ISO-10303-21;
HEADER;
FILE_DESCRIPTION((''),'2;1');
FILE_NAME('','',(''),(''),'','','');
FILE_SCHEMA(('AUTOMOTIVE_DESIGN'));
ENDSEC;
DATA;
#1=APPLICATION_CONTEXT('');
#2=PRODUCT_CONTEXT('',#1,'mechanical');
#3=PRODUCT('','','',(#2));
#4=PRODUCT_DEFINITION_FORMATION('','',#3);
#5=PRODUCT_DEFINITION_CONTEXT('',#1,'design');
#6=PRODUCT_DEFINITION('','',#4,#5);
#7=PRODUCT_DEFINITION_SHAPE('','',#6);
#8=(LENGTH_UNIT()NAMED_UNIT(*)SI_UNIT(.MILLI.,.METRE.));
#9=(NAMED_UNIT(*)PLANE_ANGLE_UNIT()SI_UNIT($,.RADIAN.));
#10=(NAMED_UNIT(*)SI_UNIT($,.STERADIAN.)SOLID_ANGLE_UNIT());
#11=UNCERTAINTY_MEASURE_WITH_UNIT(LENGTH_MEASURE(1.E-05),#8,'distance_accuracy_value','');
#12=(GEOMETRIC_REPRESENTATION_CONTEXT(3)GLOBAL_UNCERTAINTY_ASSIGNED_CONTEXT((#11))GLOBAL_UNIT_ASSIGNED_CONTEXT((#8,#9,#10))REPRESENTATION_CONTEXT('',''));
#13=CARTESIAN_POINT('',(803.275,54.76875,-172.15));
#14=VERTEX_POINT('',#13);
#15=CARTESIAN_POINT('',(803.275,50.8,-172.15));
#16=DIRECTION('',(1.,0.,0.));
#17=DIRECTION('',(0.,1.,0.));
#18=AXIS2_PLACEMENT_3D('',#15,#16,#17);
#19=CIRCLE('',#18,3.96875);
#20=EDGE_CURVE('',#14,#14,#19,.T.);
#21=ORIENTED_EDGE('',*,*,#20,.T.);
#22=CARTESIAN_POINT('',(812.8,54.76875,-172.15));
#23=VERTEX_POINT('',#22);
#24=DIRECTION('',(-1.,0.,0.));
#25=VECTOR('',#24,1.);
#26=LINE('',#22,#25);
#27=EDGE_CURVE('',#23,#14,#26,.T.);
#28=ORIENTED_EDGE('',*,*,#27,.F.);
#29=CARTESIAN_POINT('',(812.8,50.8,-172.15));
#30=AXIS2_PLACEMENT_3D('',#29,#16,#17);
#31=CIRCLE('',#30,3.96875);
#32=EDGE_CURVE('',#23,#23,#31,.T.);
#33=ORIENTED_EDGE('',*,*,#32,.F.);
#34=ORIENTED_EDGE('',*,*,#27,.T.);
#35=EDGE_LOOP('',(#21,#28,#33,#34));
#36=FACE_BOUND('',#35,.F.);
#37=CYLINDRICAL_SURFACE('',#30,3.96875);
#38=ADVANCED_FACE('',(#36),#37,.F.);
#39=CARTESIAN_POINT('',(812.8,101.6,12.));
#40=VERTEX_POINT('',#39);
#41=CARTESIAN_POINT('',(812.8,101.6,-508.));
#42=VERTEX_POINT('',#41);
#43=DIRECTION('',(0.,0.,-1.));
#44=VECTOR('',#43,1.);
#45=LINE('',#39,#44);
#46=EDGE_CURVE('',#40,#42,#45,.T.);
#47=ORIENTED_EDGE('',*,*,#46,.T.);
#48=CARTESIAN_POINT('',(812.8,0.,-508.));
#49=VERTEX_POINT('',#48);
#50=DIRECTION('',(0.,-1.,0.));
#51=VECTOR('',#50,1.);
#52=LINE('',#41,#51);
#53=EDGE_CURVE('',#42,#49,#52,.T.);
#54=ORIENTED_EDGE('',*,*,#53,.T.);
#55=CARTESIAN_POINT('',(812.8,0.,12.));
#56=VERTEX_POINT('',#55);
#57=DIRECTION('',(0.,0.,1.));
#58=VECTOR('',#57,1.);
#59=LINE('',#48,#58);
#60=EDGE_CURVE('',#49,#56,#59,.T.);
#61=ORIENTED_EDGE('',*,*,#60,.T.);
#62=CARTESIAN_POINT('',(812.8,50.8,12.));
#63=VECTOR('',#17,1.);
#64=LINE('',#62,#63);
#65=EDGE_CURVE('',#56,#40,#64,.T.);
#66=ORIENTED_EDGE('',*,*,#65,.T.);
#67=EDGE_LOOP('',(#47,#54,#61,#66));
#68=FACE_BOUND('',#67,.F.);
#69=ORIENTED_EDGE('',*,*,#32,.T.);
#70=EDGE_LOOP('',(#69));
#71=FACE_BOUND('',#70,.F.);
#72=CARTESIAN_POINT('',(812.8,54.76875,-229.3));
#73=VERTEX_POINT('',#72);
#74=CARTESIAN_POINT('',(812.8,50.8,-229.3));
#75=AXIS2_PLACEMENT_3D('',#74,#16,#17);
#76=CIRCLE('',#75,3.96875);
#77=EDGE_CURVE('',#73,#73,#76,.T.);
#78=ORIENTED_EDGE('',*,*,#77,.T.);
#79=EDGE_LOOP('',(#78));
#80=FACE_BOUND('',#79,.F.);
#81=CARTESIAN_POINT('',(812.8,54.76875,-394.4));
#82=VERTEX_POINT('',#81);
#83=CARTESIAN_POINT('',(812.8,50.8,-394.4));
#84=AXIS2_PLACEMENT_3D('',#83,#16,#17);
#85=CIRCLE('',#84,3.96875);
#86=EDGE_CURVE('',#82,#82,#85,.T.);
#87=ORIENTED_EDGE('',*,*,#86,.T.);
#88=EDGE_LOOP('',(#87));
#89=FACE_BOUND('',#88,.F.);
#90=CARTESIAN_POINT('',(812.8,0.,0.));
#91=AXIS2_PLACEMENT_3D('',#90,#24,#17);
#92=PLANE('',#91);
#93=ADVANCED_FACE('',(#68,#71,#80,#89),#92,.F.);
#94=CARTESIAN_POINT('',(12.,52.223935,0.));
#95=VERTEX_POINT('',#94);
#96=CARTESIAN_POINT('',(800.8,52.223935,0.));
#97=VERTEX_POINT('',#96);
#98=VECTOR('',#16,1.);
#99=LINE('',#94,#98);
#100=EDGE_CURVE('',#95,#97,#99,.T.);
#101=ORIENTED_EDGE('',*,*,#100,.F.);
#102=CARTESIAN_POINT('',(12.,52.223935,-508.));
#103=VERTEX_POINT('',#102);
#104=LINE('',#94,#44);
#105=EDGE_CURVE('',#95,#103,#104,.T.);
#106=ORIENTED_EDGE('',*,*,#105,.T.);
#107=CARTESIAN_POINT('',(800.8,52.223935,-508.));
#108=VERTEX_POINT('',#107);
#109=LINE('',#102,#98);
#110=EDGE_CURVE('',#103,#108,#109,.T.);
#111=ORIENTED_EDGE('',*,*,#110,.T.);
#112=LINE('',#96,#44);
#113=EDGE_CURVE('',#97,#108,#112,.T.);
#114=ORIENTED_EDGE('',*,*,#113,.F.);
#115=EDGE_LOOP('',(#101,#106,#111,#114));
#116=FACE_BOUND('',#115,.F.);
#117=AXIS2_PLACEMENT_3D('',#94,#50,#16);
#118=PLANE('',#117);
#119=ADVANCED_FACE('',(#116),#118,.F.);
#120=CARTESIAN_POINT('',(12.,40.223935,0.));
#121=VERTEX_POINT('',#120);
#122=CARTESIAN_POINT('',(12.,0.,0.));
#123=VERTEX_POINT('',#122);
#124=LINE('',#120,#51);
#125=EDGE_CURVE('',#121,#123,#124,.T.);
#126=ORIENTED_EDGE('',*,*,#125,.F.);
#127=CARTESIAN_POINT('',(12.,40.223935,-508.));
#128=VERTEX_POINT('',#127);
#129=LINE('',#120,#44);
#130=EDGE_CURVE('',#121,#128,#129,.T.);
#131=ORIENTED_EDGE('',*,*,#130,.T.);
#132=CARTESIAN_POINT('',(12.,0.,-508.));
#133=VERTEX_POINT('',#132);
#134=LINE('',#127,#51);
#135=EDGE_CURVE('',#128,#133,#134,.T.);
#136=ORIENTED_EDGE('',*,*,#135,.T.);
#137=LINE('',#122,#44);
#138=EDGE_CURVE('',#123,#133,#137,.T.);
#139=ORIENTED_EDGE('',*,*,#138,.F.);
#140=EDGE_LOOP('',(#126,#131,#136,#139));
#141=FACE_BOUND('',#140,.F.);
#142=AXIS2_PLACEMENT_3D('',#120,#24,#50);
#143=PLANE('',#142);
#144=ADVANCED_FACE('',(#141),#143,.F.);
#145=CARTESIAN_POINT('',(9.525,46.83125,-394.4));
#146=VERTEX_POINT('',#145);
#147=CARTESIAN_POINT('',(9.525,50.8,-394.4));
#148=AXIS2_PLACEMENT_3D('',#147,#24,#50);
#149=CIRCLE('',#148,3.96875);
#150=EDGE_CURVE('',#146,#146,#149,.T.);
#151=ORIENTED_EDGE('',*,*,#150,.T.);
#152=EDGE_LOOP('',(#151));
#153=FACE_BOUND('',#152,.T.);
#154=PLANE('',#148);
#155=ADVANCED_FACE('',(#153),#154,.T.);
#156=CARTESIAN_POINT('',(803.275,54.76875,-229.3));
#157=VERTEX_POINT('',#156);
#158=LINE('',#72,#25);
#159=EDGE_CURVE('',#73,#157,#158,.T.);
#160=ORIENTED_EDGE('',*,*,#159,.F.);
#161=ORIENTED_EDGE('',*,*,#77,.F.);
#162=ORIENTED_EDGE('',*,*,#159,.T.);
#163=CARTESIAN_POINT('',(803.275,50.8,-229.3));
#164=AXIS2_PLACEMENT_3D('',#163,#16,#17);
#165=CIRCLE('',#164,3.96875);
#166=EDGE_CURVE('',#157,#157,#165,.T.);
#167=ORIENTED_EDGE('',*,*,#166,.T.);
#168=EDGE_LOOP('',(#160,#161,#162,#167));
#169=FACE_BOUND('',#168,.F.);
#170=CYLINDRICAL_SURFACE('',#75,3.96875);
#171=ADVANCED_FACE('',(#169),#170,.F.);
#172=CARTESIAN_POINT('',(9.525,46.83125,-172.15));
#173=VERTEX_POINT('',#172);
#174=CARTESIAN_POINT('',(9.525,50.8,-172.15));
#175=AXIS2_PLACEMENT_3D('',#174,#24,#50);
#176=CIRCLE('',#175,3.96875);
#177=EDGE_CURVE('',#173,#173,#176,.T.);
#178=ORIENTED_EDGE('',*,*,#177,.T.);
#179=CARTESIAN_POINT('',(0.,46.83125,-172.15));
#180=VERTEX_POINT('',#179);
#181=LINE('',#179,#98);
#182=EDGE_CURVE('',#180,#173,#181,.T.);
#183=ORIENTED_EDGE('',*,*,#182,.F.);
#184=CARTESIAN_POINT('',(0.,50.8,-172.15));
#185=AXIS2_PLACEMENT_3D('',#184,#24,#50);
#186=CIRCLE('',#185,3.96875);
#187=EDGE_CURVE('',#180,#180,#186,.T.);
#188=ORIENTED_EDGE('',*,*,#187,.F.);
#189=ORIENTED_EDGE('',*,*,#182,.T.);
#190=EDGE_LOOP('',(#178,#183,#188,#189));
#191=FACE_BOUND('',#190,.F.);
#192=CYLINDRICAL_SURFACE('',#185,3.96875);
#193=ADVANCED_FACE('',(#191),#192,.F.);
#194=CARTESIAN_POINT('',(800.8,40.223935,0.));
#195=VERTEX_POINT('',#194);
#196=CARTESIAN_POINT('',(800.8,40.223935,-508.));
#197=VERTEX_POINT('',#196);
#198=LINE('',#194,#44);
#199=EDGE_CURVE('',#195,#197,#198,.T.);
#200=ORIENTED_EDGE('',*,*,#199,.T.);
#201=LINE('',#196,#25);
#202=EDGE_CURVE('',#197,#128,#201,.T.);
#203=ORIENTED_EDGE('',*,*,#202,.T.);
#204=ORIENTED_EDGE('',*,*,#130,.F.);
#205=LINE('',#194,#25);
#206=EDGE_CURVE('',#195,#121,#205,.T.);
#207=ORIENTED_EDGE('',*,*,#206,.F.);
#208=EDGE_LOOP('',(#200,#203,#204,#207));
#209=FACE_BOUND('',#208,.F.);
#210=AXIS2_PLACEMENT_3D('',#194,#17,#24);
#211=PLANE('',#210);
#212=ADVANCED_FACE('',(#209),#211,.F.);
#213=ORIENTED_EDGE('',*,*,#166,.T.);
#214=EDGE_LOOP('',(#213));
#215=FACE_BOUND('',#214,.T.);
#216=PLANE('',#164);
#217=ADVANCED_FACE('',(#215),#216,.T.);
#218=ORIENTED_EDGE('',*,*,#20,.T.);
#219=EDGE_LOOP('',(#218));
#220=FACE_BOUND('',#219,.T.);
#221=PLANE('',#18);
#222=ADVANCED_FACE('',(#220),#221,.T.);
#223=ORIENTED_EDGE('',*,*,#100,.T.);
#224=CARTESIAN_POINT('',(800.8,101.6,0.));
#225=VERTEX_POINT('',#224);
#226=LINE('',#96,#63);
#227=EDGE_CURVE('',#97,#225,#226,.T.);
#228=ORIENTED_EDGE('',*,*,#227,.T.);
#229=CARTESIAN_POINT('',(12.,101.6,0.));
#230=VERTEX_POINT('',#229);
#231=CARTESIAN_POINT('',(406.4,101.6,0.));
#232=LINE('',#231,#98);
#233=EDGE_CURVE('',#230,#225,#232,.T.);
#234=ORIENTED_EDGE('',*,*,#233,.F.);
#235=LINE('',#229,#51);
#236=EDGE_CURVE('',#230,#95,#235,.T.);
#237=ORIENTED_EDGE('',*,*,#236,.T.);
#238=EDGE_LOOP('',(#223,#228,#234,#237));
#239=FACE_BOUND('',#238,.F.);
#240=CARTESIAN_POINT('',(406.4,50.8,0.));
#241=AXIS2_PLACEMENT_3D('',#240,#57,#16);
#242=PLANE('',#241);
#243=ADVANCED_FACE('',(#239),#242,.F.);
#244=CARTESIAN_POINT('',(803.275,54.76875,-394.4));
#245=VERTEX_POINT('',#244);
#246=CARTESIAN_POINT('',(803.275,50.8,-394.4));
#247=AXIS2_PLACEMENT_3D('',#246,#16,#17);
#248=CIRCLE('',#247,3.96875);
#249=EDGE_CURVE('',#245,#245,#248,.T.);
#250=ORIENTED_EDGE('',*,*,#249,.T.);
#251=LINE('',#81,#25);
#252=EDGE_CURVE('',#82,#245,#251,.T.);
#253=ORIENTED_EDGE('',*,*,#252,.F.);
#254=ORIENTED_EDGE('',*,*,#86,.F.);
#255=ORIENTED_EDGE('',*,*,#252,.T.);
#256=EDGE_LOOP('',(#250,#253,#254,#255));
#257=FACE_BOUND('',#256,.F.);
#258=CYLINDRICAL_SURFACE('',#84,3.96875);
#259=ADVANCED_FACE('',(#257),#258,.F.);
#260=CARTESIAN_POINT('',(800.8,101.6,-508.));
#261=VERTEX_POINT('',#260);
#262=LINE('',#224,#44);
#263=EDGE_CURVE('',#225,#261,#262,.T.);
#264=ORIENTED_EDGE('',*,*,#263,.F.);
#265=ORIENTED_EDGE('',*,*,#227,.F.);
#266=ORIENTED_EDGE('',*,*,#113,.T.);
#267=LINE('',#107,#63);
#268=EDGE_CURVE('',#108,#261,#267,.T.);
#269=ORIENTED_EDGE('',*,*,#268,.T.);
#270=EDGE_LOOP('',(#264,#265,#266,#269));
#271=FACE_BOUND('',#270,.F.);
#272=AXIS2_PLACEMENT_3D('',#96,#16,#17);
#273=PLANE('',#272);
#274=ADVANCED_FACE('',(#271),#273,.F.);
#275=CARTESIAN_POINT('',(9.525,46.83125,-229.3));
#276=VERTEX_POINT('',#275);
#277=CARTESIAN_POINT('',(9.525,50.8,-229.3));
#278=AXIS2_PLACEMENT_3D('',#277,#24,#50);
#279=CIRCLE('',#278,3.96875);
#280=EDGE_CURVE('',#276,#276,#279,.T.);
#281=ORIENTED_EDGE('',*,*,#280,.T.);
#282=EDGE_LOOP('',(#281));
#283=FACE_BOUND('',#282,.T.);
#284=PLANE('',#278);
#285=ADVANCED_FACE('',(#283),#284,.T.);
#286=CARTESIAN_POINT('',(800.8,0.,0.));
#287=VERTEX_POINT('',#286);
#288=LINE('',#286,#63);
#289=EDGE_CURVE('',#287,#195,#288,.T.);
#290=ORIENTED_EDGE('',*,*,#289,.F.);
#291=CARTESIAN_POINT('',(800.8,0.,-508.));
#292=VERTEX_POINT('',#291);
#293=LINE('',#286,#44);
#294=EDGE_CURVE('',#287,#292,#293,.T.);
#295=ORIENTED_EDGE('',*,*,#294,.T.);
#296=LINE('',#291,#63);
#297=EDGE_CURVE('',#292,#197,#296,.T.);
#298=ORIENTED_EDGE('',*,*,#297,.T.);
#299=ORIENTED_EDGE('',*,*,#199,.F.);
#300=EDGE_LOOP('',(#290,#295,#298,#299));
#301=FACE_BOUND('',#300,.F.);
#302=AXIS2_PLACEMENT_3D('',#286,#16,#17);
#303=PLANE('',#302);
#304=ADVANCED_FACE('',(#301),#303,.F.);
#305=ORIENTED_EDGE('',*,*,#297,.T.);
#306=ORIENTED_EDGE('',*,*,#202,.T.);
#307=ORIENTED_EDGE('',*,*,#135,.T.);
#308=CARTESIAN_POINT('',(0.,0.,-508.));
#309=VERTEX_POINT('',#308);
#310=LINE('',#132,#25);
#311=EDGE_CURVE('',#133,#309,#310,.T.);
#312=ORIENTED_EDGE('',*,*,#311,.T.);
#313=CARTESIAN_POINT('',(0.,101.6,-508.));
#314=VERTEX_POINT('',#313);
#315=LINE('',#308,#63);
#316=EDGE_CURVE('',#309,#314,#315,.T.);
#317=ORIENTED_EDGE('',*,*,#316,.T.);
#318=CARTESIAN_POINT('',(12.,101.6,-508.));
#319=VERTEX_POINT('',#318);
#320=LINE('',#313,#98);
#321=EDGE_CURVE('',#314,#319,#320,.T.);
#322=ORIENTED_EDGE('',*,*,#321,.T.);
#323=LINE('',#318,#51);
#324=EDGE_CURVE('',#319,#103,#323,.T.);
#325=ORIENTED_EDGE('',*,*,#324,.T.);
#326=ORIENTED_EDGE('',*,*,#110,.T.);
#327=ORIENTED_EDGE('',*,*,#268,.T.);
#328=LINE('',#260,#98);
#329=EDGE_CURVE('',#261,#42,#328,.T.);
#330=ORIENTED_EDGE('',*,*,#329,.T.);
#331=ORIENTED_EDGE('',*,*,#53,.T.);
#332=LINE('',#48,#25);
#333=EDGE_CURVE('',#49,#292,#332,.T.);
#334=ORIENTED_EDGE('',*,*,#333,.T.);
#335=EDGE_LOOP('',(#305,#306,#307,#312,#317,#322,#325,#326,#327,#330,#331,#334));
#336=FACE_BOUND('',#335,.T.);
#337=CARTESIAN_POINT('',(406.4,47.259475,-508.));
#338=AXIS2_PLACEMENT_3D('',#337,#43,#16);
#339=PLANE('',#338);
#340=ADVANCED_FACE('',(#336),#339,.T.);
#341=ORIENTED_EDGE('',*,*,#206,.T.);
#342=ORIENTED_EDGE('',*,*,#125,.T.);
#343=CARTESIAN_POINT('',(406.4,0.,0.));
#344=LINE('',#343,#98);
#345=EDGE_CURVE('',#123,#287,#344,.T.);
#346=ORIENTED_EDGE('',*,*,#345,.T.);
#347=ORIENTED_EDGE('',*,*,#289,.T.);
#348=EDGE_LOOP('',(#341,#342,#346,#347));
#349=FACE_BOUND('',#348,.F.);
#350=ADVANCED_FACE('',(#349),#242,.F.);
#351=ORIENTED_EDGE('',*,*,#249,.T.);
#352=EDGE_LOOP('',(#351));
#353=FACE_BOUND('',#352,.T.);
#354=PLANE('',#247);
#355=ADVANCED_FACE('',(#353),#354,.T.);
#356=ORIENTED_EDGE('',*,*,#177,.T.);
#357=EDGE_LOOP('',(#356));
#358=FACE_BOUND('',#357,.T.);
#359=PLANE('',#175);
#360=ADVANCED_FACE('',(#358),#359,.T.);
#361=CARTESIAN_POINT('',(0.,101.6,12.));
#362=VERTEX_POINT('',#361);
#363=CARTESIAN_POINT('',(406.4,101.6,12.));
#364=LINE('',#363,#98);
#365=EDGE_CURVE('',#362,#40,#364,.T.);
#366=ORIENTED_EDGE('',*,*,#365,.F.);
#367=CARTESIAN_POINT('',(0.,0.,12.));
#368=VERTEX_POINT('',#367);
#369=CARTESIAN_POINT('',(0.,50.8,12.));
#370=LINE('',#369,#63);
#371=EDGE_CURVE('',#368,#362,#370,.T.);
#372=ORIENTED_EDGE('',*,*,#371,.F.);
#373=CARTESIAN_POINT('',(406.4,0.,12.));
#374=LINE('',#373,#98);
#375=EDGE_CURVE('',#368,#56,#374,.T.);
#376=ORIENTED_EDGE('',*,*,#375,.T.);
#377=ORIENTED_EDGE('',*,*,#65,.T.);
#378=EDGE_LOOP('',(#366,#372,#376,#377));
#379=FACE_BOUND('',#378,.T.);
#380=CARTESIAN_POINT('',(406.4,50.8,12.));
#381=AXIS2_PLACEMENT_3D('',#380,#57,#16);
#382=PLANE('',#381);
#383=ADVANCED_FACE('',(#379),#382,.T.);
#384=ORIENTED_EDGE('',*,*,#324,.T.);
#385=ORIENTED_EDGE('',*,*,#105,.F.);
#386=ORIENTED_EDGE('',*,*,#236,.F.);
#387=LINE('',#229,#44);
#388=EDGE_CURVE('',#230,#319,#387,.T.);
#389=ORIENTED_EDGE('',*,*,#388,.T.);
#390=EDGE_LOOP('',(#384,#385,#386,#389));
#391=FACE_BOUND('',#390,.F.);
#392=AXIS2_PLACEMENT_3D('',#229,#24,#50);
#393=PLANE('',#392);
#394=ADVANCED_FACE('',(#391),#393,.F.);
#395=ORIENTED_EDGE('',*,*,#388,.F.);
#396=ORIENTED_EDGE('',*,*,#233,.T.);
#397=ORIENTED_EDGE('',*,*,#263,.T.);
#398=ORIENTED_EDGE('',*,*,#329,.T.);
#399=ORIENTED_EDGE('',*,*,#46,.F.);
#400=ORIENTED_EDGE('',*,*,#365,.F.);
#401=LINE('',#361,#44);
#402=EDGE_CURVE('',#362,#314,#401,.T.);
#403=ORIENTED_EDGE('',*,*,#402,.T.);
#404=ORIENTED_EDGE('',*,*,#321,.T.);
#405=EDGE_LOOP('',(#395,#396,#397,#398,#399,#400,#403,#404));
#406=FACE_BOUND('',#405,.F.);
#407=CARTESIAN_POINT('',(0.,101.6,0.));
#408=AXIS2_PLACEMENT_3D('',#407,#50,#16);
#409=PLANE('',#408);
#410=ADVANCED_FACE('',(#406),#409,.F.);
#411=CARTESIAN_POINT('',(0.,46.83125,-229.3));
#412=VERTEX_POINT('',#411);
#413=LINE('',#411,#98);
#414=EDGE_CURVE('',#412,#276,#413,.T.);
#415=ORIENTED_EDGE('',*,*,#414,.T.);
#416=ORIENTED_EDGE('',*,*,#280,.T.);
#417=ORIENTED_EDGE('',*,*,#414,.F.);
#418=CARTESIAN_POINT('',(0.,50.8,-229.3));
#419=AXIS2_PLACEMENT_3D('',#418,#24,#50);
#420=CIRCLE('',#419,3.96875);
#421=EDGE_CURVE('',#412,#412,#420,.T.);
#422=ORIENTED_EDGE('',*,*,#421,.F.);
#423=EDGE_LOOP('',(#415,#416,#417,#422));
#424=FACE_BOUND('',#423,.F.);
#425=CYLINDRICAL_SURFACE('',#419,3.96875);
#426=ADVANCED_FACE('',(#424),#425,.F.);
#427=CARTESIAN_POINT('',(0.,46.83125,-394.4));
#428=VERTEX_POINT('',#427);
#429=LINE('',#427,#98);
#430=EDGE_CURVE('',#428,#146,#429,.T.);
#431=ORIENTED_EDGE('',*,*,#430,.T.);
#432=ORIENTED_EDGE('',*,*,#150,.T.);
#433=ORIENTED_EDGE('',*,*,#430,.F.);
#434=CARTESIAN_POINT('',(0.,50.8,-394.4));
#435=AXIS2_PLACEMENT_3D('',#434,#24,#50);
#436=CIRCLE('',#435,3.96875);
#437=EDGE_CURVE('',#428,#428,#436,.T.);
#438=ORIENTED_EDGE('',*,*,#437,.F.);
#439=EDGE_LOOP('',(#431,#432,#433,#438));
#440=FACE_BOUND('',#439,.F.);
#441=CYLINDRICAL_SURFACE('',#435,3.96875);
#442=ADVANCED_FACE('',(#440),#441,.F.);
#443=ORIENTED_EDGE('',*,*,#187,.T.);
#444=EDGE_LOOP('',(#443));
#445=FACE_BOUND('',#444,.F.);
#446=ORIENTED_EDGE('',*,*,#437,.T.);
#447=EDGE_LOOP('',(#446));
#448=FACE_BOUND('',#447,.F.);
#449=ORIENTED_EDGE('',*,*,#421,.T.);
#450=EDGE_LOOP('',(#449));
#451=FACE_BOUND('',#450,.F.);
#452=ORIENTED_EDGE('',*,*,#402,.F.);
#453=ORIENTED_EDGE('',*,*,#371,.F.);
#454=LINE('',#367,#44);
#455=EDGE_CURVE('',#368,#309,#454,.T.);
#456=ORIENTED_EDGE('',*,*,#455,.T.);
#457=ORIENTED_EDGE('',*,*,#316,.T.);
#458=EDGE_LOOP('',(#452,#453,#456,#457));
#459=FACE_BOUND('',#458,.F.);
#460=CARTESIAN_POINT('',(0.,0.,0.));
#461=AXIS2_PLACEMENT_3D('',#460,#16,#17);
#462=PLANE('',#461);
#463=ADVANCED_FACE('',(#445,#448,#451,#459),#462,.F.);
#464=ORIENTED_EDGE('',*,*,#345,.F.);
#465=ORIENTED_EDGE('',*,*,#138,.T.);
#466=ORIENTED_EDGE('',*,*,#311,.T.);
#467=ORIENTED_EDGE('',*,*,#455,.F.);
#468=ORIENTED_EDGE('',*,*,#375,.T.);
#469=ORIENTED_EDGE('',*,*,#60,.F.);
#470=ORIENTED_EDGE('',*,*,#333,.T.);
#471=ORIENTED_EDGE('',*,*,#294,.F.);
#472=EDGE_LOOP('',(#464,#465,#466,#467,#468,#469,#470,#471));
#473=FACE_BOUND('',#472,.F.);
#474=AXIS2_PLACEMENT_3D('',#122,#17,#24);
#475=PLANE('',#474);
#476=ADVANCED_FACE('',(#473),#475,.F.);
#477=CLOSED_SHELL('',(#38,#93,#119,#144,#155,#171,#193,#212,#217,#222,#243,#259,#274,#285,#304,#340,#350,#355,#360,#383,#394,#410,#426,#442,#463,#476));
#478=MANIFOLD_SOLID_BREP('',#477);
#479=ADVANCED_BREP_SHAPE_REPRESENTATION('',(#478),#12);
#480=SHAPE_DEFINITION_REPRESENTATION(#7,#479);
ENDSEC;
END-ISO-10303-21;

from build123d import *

# Parameters (mm, degrees)
F0_W     = 812.8
F0_H     = 101.6
F1_DEPTH = 12
F3_DEPTH = 508
F4_R     = 3.96875
F5_DEPTH = 9.525
F6_R     = 3.96875
F7_DEPTH = 9.525


# Not quite as in the source:
# - a length typed as a fraction of an inch, garbled in the dataset ("3 / 203.2 mm" for 3/8 in), is restored


with BuildPart() as f1:
    # F0 (on Top) → F1 (new body)
    with BuildSketch(Plane.XY):
        with Locations((406.4, 50.8)):
            Rectangle(F0_W, F0_H)
    extrude(amount=F1_DEPTH)

    # F2 (on face) → F3 (join)
    with BuildSketch(Plane(origin=(0, 0, 0), x_dir=(1, 0, 0), z_dir=(0, 0, -1))):
        Polygon((12, 0), (0, 0), (0, -101.6), (12, -101.6), (12, -52.2239353538), (800.8, -52.2239353538), (800.8, -101.6), (812.8, -101.6), (812.8, 0), (800.8, 0), (800.8, -40.2239353538), (12, -40.2239353538), align=None)
    extrude(amount=F3_DEPTH)

    # F4 (on face) → F5 (cut)
    with BuildSketch(Plane.YZ.offset(812.8)):
        with Locations((50.8, -172.15)):
            Circle(F4_R)
        with Locations((50.8, -229.3)):
            Circle(F4_R)
        with Locations((50.8, -394.4)):
            Circle(F4_R)
    extrude(amount=-F5_DEPTH, mode=Mode.SUBTRACT)

    # F6 (on face) → F7 (cut)
    with BuildSketch(Plane(origin=(0, 0, 0), x_dir=(0, -1, 0), z_dir=(-1, 0, 0))):
        with Locations((-50.8, -172.15)):
            Circle(F6_R)
        with Locations((-50.8, -229.3)):
            Circle(F6_R)
        with Locations((-50.8, -394.4)):
            Circle(F6_R)
    extrude(amount=-F7_DEPTH, mode=Mode.SUBTRACT)


solid = f1.part
